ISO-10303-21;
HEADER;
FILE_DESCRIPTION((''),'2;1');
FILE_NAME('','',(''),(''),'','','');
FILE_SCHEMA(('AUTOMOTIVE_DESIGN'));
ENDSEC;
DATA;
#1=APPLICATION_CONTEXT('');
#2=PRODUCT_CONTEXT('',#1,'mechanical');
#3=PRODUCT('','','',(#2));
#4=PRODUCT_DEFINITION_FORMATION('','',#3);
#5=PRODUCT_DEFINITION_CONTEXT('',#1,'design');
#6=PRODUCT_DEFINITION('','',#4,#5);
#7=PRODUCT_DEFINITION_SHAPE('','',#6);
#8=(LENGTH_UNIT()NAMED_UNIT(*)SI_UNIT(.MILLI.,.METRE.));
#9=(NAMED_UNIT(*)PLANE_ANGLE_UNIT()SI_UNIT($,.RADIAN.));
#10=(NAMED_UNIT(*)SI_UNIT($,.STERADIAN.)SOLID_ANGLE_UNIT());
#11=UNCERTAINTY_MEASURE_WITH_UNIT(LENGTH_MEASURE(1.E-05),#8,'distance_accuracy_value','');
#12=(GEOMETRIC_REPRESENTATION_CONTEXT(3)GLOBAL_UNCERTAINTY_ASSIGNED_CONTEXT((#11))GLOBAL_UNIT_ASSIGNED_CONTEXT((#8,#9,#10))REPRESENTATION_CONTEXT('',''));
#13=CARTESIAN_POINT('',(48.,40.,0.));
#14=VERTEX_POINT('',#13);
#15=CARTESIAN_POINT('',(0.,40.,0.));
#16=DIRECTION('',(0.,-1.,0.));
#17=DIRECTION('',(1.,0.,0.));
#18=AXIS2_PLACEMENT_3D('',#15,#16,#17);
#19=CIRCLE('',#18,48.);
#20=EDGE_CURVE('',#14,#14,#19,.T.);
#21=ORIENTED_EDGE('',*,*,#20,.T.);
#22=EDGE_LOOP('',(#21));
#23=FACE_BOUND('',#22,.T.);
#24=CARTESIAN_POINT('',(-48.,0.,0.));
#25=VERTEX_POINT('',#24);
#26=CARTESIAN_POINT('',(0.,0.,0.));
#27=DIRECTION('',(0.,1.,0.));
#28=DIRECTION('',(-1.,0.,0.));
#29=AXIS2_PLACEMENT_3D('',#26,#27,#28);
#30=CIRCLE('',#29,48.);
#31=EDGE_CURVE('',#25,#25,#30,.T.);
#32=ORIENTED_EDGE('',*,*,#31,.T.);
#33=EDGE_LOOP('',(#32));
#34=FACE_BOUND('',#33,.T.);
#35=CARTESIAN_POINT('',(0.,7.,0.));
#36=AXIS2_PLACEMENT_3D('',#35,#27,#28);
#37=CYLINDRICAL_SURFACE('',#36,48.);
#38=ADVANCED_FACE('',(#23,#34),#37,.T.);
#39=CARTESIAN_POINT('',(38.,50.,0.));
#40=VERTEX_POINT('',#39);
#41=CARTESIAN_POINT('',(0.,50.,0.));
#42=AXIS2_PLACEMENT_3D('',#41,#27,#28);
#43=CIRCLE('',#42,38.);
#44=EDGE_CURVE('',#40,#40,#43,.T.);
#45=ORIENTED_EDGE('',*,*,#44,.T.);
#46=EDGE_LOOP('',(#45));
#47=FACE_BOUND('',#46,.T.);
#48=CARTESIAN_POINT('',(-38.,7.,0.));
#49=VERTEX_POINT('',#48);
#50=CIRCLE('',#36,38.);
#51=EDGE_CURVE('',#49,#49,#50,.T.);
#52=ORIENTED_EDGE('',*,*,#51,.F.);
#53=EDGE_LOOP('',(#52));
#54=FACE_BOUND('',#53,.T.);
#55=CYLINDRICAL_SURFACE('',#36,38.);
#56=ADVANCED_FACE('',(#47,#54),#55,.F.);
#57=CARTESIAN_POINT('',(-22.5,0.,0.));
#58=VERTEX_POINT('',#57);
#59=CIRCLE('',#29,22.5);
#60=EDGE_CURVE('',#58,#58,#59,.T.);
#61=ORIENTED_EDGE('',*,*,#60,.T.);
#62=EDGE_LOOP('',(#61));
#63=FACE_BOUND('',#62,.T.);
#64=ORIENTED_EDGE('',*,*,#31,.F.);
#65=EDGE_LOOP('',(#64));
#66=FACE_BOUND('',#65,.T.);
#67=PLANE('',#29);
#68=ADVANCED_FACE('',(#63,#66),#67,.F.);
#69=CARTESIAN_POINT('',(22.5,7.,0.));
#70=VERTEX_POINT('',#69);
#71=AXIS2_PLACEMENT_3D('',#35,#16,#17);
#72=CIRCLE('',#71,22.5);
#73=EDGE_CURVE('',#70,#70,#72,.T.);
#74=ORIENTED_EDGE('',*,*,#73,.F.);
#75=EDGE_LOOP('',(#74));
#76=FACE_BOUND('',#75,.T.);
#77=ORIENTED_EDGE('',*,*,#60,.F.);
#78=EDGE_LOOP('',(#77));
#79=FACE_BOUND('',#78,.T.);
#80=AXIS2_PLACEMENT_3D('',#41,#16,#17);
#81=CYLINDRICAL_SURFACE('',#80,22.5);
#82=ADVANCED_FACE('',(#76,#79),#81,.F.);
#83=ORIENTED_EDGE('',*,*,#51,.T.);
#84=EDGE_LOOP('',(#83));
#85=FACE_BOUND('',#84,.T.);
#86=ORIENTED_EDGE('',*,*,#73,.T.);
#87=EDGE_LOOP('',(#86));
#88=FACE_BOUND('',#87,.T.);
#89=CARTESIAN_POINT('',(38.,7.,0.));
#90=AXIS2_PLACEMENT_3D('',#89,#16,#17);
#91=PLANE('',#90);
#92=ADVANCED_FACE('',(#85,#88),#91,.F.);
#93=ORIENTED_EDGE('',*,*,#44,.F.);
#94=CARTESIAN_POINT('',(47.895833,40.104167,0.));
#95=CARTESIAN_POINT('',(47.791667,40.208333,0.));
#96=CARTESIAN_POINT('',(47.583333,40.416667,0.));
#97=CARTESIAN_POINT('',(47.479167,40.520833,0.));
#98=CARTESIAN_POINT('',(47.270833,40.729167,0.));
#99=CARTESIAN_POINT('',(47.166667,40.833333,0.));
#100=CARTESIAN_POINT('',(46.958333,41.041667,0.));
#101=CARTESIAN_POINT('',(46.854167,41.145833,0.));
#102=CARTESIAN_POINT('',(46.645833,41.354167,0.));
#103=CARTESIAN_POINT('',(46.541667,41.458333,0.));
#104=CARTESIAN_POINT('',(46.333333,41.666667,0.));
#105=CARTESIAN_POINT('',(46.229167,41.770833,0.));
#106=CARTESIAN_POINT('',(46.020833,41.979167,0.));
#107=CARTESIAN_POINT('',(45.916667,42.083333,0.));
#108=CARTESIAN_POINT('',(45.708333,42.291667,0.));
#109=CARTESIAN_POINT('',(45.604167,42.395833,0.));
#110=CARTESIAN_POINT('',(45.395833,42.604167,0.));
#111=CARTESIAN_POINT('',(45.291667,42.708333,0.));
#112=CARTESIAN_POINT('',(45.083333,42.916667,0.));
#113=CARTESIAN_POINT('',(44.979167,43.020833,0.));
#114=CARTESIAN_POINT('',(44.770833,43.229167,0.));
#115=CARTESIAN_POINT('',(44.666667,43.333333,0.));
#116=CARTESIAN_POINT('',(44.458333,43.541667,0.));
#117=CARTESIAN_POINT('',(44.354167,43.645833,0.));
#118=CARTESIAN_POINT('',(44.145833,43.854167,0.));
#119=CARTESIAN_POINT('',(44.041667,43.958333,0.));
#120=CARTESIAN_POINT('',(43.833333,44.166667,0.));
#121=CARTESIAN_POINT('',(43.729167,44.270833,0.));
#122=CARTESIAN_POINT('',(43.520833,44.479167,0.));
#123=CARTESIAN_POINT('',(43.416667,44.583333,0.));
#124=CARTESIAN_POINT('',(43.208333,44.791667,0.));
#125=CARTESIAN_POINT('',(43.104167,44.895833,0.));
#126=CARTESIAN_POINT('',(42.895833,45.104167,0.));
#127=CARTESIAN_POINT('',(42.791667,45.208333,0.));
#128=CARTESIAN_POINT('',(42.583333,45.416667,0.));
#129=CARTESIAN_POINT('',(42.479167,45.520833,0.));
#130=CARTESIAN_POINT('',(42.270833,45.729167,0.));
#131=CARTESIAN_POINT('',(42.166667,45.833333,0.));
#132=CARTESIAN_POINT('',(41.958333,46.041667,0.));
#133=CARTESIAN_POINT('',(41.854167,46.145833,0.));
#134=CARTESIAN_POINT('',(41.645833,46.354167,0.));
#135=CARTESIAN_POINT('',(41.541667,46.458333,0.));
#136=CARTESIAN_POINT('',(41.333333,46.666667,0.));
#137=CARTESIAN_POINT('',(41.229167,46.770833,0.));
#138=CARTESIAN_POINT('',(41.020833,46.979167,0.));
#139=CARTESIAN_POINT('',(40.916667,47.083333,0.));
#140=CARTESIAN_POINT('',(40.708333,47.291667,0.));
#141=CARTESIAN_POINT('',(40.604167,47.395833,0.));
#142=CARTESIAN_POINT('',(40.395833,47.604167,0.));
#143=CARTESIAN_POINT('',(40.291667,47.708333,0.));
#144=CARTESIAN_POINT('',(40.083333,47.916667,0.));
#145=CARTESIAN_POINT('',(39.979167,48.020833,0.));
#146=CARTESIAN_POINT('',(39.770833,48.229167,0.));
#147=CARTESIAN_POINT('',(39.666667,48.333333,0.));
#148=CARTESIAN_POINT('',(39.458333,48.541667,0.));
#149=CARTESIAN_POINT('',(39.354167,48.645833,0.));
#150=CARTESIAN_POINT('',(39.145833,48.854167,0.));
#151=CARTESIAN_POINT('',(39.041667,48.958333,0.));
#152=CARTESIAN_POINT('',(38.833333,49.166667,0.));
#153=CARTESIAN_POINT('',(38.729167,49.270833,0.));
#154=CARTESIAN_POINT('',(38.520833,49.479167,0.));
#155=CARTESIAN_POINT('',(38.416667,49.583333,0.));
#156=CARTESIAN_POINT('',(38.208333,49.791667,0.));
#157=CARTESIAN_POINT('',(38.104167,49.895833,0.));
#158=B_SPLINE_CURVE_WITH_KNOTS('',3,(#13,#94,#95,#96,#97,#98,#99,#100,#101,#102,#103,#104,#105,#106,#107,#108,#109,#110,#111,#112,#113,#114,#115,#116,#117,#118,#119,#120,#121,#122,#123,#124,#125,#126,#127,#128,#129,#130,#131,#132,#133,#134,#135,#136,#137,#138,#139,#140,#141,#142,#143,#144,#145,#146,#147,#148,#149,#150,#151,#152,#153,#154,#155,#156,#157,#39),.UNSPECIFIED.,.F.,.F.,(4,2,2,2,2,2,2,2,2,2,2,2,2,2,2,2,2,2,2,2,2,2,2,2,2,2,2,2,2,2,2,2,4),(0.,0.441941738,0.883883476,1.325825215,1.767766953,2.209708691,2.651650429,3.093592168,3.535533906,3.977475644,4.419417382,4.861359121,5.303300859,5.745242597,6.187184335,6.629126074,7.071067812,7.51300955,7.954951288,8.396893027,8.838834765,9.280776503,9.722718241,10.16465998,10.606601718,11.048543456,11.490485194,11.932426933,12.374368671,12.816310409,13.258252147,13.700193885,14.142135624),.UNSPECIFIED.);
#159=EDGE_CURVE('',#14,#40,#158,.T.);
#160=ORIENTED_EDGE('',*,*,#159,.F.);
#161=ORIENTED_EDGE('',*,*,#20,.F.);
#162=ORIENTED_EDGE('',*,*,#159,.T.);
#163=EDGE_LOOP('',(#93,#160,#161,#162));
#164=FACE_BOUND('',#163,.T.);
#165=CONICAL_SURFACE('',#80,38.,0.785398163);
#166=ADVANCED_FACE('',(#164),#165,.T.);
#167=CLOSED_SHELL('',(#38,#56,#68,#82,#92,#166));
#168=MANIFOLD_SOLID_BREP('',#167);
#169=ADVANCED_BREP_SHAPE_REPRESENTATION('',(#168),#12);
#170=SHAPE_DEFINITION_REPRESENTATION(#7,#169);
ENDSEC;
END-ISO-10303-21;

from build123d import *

# Parameters (mm, degrees)
CUT_EXTRUDE1_DEPTH      = 85.308955633
CUT_EXTRUDE1_DEPTH_BACK = 85.308955633
SKETCH2_R               = 22.5
CHAMFER1_SIZE           = 10


with BuildPart() as part:
    # Sketch1 → Revolve2 (revolve)
    with BuildSketch(Plane.XY, mode=Mode.PRIVATE) as revolve2_sk:
        Polygon((0, 0), (48, 0), (48, 50), (38, 50), (38, 7), (0, 7), align=None)
    revolve(revolve2_sk.sketch.rotate(Axis((0, 7, 0), (0, -1, 0)), 180), axis=Axis((0, 7, 0), (0, -1, 0)))

    # Sketch2 → Cut-Extrude1 (cut, two sides: drawn at the far end of the back side and taken through both)
    with BuildSketch(Plane.XZ.offset(-CUT_EXTRUDE1_DEPTH_BACK)):
        Circle(SKETCH2_R)
    extrude(amount=CUT_EXTRUDE1_DEPTH + CUT_EXTRUDE1_DEPTH_BACK, mode=Mode.SUBTRACT)

    # Chamfer1
    chamfer1_edges = [part.edges().sort_by_distance(p)[0] for p in [
        (48, 50, 0),
    ]]
    chamfer(chamfer1_edges, length=CHAMFER1_SIZE - 0.0001)  # a hair under: the kernel refuses the full size


solid = part.part
